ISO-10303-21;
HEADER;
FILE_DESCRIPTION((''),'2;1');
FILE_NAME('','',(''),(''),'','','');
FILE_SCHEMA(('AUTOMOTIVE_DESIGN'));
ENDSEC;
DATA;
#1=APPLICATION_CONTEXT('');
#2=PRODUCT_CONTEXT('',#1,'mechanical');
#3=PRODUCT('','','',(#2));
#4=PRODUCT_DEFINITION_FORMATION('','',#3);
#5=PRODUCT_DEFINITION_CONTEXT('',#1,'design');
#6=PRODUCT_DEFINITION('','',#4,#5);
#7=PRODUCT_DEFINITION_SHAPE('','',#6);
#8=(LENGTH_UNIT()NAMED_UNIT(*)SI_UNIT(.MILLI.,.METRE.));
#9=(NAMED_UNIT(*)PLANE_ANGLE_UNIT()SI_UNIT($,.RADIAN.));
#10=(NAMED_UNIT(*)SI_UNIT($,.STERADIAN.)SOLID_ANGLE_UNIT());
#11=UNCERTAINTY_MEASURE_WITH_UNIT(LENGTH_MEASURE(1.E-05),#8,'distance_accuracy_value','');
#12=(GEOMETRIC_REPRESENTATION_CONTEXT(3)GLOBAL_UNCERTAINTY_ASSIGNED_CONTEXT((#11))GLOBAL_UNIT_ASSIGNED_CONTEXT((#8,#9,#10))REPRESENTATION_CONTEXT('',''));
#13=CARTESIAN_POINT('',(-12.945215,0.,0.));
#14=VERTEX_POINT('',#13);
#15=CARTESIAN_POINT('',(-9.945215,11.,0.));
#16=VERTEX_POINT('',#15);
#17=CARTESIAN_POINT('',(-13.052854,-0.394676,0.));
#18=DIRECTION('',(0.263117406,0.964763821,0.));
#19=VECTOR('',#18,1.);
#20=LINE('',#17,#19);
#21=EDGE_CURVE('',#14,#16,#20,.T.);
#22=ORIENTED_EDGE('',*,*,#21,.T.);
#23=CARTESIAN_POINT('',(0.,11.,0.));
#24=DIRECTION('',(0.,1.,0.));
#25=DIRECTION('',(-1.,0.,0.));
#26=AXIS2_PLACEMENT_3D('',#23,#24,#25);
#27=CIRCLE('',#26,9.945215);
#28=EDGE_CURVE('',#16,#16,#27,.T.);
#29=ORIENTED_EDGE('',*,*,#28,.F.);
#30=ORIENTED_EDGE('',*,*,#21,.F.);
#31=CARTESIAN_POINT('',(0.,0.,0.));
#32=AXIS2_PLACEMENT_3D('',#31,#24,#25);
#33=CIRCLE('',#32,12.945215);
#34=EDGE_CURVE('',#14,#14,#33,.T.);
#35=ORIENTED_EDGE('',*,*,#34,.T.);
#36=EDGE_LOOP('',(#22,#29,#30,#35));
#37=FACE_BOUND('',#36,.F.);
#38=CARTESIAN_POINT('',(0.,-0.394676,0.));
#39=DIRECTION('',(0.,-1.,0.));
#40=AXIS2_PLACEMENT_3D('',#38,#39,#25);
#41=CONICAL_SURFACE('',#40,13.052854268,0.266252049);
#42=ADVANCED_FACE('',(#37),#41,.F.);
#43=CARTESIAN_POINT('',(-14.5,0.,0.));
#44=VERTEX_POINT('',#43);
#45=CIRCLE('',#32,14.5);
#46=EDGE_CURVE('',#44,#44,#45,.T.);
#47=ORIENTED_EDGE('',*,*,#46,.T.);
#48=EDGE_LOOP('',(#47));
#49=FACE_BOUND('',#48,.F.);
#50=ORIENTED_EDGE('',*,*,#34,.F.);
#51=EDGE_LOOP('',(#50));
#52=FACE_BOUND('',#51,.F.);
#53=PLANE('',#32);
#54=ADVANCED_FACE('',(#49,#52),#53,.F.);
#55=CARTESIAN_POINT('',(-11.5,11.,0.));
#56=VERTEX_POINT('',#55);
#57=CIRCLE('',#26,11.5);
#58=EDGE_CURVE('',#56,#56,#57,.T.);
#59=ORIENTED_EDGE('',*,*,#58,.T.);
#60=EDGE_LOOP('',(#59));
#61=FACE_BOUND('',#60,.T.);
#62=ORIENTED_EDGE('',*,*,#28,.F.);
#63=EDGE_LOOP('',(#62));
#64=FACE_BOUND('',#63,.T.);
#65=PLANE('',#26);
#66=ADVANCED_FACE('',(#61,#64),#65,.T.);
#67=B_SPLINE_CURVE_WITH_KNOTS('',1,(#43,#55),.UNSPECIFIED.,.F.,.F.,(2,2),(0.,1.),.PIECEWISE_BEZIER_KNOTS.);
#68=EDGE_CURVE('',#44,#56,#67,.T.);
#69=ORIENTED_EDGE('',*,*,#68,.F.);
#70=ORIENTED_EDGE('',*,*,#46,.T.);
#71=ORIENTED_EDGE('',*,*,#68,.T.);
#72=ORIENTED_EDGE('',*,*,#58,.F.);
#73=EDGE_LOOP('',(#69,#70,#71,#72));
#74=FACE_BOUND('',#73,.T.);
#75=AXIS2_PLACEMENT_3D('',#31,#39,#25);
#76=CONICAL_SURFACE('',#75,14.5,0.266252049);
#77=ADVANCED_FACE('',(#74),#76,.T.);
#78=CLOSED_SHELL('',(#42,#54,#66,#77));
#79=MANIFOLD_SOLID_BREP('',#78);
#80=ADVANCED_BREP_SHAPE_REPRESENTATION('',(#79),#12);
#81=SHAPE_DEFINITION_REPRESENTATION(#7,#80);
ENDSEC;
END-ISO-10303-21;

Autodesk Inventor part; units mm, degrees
ref_plane "YZ Plane" through (0, 0, 0) normal (1, 0, 0) x (0, 1, 0)
ref_plane "XY Plane" through (0, 0, 0) normal (0, 0, 1) x (1, 0, 0)
sketch "Szkic6" plane through (0, 0, 0) normal (0, 1, 0) x (-1, 0, 0)
  circle A0 centre (0, 0) radius 14.5
  dimension "d33" = 29
ref_plane "Płaszczyzna konstrukcyjna1" through (0, 11, 0) normal (0, 1, 0) x (-1, 0, 0)
sketch "Szkic7" plane through (0, 11, 0) normal (0, 1, 0) x (-1, 0, 0)
  circle A0 centre (0, 0) radius 11.5
  dimension "d35" = 23
loft "Wyciągnięcie złożone1" add profiles "Szkic6", "Szkic7"
shell "Skorupa1" thickness 1.5 removed faces 2 at (-0.1507, 11, 2.542) at (1.052, 0, -3.5603)
equation "\"d33\" = OD1"
equation "\"d35\" = OD2"
equation "\"d52\" = THK"
equation "\"SzerokośćGięciaPodcięcia\" = Grubość"
equation "\"RozmiarPodcięciaNarożnika\" = 4 * Grubość"
equation "\"PromieńPrzejścia\" = PromieńGięcia"
equation "\"Rozmiar_promienia_Jacobiego\" = PromieńGięcia"
equation "\"Wielk_odstępu\" = Grubość"
equation "\"d2\" = PromieńGięcia"
equation "\"d23\" = PromieńGięcia"
equation "\"OD1\" = 29"
equation "\"OD2\" = 23"
equation "\"L\" = 11"
equation "\"THK\" = 1.5"
equation "\"d34\" = L"
equation "\"Grubość\" = 1.5"
equation "\"PromieńGięcia\" = 3"
properties part number "Redukcja symetryczna Ø29x23x1,5 L=11" material "304"
